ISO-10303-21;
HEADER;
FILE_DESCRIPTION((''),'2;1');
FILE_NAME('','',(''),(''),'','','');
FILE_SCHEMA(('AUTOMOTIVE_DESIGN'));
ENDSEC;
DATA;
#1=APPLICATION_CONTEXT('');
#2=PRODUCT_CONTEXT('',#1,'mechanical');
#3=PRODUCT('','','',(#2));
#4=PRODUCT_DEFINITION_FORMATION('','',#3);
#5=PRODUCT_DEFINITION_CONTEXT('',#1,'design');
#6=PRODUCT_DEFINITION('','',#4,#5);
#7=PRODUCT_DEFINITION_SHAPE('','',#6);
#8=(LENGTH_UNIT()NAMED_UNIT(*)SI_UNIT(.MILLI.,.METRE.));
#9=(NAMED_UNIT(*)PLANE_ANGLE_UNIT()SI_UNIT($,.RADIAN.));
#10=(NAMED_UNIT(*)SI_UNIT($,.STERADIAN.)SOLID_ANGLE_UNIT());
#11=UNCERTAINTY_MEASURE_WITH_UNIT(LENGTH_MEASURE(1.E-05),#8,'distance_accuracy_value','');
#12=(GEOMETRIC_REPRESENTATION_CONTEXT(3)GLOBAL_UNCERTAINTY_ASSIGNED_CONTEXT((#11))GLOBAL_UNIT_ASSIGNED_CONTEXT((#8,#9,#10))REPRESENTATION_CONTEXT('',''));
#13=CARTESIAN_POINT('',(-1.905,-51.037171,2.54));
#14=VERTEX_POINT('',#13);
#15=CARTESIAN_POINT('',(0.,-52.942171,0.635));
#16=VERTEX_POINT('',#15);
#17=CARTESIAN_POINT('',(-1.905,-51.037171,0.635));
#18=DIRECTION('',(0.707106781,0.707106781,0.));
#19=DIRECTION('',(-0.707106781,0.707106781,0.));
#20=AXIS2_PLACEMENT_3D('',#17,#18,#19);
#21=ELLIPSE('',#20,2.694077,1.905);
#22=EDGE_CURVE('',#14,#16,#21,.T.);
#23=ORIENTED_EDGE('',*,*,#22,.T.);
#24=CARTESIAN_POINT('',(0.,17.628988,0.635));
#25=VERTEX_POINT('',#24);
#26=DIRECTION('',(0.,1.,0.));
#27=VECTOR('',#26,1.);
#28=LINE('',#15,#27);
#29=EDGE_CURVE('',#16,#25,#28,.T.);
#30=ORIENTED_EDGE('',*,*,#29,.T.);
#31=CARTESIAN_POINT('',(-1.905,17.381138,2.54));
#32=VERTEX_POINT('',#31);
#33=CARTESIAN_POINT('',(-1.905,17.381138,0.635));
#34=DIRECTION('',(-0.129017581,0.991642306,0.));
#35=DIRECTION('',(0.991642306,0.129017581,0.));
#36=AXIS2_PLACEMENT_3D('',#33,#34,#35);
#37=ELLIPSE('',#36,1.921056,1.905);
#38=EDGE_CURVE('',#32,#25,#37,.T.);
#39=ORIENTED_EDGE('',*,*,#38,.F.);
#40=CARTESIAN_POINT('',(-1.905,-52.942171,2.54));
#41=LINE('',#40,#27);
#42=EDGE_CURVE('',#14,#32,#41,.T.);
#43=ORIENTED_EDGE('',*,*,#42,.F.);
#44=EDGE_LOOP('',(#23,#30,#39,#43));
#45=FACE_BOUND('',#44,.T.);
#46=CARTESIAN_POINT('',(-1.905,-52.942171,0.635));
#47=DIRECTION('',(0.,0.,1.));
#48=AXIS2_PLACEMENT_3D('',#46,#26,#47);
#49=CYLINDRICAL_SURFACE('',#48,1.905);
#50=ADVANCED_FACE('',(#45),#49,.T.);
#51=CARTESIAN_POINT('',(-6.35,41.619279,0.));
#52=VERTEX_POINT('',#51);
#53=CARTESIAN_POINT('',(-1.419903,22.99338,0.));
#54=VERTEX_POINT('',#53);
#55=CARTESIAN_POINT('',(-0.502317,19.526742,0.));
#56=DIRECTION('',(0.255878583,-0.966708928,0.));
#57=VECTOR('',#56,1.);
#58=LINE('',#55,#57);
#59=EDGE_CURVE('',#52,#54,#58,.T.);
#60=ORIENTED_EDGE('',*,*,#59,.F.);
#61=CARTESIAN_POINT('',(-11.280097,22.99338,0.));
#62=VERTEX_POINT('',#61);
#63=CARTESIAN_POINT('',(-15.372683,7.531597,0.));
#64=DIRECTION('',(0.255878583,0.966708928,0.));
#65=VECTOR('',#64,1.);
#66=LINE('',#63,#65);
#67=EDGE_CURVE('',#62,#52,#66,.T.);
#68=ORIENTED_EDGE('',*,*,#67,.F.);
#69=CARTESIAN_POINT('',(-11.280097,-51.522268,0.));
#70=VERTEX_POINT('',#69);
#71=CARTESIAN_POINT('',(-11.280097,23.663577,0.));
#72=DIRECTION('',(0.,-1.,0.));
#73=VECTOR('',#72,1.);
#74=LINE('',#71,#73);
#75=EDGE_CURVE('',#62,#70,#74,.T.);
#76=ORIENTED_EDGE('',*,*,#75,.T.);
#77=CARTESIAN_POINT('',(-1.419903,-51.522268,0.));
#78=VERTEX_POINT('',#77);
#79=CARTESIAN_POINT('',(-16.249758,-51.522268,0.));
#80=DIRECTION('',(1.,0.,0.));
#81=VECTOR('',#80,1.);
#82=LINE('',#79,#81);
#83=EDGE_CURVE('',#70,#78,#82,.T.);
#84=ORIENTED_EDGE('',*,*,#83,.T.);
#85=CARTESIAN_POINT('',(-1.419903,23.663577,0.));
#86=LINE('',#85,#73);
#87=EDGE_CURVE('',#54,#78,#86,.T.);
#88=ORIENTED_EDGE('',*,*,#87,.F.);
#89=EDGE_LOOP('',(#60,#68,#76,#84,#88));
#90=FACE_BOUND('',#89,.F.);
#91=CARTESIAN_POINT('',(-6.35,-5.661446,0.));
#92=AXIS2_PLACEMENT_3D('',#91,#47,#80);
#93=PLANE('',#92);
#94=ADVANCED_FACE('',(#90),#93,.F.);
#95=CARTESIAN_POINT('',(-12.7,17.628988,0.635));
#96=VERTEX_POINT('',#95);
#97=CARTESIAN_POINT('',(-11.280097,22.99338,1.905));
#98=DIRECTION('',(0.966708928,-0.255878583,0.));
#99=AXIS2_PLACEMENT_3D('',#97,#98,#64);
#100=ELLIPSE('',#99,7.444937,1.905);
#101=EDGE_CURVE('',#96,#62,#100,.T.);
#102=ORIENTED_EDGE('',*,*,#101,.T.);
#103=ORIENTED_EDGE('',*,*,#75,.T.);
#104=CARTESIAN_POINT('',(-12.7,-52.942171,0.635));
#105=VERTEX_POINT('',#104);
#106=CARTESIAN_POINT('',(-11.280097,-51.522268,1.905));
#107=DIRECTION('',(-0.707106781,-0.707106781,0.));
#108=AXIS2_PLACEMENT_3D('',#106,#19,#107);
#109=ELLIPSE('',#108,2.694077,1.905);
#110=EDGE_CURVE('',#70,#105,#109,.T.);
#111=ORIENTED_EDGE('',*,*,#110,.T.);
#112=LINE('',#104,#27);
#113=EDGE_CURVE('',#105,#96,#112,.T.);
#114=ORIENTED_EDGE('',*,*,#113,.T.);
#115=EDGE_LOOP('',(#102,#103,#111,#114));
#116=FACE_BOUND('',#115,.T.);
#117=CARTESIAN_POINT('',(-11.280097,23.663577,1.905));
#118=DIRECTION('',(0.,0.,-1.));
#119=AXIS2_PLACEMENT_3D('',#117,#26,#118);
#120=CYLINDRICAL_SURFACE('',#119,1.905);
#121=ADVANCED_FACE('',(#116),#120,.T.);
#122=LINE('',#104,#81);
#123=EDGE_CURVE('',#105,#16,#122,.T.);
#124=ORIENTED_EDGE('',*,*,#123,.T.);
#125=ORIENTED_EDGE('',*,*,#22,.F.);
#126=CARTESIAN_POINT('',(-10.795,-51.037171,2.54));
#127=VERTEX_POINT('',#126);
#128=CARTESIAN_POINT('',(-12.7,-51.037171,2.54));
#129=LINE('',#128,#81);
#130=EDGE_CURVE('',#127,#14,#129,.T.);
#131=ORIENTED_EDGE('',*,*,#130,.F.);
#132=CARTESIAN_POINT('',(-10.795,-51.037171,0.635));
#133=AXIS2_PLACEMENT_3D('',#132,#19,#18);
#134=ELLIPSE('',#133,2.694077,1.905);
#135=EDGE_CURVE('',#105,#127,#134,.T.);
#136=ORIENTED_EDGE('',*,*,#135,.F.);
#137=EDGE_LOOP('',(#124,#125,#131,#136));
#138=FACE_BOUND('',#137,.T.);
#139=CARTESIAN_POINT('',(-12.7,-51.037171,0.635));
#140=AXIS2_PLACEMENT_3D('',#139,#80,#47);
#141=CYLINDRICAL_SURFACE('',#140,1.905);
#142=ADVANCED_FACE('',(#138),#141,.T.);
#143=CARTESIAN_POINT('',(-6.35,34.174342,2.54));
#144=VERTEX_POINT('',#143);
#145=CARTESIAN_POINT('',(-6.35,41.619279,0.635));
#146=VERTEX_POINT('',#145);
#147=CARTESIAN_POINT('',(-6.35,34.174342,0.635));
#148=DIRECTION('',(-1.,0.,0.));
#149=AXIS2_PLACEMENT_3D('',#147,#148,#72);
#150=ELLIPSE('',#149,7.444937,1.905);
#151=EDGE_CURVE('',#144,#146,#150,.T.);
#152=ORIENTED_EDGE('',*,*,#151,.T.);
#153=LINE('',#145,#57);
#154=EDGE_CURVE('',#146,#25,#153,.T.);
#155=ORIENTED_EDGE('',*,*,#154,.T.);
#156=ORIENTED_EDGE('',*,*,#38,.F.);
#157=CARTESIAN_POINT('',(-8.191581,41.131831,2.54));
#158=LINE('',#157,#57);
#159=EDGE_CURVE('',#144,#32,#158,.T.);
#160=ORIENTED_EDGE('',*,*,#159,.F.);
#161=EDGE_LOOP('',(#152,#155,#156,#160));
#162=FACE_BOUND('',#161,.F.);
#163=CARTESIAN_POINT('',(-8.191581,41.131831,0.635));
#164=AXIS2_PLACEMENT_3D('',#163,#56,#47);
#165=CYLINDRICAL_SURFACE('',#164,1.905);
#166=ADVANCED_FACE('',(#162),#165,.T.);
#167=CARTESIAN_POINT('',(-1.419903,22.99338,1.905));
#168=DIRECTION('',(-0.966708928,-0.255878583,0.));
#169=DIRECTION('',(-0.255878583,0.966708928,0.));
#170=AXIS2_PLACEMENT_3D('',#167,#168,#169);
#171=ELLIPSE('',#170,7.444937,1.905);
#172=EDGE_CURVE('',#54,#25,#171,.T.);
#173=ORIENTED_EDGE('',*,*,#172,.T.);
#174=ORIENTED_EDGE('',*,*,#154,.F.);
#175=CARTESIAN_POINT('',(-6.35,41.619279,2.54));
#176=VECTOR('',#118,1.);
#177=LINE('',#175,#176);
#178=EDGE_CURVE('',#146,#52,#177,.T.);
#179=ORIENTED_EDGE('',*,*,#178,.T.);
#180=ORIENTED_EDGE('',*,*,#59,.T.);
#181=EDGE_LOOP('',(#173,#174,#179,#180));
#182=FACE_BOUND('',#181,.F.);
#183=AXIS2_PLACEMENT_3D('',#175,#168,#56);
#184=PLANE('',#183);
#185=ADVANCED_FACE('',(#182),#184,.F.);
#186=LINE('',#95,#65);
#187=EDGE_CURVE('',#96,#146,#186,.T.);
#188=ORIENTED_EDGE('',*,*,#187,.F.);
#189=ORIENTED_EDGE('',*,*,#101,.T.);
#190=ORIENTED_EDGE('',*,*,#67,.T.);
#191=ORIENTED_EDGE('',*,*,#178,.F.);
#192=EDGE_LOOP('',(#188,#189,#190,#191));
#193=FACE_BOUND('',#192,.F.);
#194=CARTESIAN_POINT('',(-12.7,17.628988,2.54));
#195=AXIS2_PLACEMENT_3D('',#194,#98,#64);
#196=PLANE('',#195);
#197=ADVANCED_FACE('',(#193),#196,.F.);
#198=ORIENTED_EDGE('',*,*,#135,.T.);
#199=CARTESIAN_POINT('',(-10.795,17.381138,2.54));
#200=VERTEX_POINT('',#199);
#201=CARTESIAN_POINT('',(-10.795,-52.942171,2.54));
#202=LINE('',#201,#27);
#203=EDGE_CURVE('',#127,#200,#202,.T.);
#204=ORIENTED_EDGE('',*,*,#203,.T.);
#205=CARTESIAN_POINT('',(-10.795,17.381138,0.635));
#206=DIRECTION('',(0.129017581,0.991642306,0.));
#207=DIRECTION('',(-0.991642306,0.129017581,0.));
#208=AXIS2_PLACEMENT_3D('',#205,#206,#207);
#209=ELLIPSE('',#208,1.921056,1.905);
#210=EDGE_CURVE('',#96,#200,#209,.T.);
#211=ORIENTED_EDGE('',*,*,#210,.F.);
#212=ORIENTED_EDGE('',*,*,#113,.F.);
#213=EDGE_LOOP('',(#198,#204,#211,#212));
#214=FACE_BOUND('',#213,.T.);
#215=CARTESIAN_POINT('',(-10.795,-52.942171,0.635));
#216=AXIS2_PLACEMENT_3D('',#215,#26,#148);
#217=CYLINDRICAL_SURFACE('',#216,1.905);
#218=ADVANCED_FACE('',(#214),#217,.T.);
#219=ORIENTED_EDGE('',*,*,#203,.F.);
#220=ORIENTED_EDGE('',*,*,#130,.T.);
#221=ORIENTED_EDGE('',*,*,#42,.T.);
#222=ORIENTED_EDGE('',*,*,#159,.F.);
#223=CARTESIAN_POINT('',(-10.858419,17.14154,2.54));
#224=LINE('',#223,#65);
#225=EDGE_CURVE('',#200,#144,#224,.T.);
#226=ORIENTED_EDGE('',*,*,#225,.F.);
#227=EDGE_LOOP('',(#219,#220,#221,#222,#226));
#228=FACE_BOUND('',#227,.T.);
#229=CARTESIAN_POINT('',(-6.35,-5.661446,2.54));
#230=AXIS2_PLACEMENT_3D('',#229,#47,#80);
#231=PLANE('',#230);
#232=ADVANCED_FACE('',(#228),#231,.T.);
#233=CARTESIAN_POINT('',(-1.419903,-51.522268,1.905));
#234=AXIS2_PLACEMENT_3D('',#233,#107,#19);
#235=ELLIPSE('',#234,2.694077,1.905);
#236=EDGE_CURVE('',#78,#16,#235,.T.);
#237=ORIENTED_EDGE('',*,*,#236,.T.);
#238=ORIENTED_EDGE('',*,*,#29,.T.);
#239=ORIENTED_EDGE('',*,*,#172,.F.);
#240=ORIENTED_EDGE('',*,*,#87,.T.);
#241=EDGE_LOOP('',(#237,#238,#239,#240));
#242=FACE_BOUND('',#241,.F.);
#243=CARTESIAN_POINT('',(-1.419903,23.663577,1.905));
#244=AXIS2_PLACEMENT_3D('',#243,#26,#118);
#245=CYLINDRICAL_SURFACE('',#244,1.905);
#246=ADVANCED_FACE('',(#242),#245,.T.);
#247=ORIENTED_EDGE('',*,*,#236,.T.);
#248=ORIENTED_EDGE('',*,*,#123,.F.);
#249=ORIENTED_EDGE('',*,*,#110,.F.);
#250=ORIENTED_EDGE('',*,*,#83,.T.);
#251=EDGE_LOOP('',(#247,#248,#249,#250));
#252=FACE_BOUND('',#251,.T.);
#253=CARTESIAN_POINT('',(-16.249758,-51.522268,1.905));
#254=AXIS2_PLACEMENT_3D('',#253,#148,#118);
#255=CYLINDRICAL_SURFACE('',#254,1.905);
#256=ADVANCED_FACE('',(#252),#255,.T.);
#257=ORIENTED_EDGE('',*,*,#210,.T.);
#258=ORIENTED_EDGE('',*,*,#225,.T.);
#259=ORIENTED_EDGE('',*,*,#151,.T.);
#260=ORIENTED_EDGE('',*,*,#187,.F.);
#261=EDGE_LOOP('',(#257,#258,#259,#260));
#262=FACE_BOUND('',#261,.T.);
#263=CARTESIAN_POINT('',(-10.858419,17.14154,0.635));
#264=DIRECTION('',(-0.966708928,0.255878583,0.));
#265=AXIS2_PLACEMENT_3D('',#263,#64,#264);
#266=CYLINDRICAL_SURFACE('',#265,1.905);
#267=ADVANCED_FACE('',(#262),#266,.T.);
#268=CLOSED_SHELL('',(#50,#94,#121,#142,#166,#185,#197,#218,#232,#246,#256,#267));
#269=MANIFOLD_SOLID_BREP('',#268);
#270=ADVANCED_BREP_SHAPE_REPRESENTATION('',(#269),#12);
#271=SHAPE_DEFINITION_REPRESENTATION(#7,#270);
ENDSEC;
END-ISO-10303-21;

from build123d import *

# Parameters (mm, degrees)
F0_W        = 12.7
F0_H        = 94.5614505536
F1_DEPTH    = 2.54
F3_DEPTH    = 3.81
F4_R        = 1.905
F5_T1_DEPTH = 19.7995158286
F5_T3_DEPTH = 80.155505846


# Not quite as in the source:
# - a fillet or chamfer that OpenCascade refuses, or shapes differently, is made with other operations: its cross-section is extruded or revolved along the edge and cut away or added


with BuildPart() as f1:
    # F0 (on Top) → F1 (new body)
    with BuildSketch(Plane.XY):
        with Locations((-6.35, -5.6614459495)):
            Rectangle(F0_W, F0_H)
    extrude(amount=F1_DEPTH)

    # F2 (on face) → F3 (cut)
    with BuildSketch(Plane.XY.offset(2.54)):
        Polygon((-12.7, 17.6289882511), (-6.35, 41.6192793273), (-12.7, 41.6192793273), align=None)
        Polygon((0, 41.6192793273), (-6.35, 41.6192793273), (0, 17.6289882511), align=None)
    extrude(amount=-F3_DEPTH, mode=Mode.SUBTRACT)

    # F4
    f4_edges = [f1.edges().sort_by_distance(p)[0] for p in [
        (-3.175, 29.624134, 2.54),
        (-12.7, -17.656591, 2.54),
        (0, -17.656591, 2.54),
        (-6.35, -52.942171, 2.54),
        (-9.525, 29.624134, 2.54),
    ]]
    fillet(f4_edges, radius=F4_R)

    # F5: fillet of radius 1.905 on 3 edges, made by hand

    # F5_s2 → F5_t1 (cut)
    with BuildSketch(Plane.YZ.offset(-16.2497579143)):
        with BuildLine():
            ThreePointArc((-51.5222680606, 0), (-52.299981054, 0.1659808799), (-52.9421712264, 0.635))
            Line((-52.9421712264, 0.635), (-52.9421712264, 0))
            Line((-52.9421712264, 0), (-51.5222680606, 0))
        make_face()
    extrude(amount=F5_T1_DEPTH, mode=Mode.SUBTRACT)

    # F5_s4 → F5_t3 (cut)
    with BuildSketch(Plane.XZ.offset(-23.6635767054)):
        with BuildLine():
            ThreePointArc((-11.2800968343, 0), (-12.0578098276, 0.1659808799), (-12.7, 0.635))
            Line((-12.7, 0.635), (-12.7, 0))
            Line((-12.7, 0), (-11.2800968343, 0))
        make_face()
        with BuildLine():
            ThreePointArc((-1.4199031657, 0), (-0.6421901724, 0.1659808799), (0, 0.635))
            Line((0, 0.635), (0, 0))
            Line((0, 0), (-1.4199031657, 0))
        make_face()
    extrude(amount=F5_T3_DEPTH, mode=Mode.SUBTRACT)


solid = f1.part
